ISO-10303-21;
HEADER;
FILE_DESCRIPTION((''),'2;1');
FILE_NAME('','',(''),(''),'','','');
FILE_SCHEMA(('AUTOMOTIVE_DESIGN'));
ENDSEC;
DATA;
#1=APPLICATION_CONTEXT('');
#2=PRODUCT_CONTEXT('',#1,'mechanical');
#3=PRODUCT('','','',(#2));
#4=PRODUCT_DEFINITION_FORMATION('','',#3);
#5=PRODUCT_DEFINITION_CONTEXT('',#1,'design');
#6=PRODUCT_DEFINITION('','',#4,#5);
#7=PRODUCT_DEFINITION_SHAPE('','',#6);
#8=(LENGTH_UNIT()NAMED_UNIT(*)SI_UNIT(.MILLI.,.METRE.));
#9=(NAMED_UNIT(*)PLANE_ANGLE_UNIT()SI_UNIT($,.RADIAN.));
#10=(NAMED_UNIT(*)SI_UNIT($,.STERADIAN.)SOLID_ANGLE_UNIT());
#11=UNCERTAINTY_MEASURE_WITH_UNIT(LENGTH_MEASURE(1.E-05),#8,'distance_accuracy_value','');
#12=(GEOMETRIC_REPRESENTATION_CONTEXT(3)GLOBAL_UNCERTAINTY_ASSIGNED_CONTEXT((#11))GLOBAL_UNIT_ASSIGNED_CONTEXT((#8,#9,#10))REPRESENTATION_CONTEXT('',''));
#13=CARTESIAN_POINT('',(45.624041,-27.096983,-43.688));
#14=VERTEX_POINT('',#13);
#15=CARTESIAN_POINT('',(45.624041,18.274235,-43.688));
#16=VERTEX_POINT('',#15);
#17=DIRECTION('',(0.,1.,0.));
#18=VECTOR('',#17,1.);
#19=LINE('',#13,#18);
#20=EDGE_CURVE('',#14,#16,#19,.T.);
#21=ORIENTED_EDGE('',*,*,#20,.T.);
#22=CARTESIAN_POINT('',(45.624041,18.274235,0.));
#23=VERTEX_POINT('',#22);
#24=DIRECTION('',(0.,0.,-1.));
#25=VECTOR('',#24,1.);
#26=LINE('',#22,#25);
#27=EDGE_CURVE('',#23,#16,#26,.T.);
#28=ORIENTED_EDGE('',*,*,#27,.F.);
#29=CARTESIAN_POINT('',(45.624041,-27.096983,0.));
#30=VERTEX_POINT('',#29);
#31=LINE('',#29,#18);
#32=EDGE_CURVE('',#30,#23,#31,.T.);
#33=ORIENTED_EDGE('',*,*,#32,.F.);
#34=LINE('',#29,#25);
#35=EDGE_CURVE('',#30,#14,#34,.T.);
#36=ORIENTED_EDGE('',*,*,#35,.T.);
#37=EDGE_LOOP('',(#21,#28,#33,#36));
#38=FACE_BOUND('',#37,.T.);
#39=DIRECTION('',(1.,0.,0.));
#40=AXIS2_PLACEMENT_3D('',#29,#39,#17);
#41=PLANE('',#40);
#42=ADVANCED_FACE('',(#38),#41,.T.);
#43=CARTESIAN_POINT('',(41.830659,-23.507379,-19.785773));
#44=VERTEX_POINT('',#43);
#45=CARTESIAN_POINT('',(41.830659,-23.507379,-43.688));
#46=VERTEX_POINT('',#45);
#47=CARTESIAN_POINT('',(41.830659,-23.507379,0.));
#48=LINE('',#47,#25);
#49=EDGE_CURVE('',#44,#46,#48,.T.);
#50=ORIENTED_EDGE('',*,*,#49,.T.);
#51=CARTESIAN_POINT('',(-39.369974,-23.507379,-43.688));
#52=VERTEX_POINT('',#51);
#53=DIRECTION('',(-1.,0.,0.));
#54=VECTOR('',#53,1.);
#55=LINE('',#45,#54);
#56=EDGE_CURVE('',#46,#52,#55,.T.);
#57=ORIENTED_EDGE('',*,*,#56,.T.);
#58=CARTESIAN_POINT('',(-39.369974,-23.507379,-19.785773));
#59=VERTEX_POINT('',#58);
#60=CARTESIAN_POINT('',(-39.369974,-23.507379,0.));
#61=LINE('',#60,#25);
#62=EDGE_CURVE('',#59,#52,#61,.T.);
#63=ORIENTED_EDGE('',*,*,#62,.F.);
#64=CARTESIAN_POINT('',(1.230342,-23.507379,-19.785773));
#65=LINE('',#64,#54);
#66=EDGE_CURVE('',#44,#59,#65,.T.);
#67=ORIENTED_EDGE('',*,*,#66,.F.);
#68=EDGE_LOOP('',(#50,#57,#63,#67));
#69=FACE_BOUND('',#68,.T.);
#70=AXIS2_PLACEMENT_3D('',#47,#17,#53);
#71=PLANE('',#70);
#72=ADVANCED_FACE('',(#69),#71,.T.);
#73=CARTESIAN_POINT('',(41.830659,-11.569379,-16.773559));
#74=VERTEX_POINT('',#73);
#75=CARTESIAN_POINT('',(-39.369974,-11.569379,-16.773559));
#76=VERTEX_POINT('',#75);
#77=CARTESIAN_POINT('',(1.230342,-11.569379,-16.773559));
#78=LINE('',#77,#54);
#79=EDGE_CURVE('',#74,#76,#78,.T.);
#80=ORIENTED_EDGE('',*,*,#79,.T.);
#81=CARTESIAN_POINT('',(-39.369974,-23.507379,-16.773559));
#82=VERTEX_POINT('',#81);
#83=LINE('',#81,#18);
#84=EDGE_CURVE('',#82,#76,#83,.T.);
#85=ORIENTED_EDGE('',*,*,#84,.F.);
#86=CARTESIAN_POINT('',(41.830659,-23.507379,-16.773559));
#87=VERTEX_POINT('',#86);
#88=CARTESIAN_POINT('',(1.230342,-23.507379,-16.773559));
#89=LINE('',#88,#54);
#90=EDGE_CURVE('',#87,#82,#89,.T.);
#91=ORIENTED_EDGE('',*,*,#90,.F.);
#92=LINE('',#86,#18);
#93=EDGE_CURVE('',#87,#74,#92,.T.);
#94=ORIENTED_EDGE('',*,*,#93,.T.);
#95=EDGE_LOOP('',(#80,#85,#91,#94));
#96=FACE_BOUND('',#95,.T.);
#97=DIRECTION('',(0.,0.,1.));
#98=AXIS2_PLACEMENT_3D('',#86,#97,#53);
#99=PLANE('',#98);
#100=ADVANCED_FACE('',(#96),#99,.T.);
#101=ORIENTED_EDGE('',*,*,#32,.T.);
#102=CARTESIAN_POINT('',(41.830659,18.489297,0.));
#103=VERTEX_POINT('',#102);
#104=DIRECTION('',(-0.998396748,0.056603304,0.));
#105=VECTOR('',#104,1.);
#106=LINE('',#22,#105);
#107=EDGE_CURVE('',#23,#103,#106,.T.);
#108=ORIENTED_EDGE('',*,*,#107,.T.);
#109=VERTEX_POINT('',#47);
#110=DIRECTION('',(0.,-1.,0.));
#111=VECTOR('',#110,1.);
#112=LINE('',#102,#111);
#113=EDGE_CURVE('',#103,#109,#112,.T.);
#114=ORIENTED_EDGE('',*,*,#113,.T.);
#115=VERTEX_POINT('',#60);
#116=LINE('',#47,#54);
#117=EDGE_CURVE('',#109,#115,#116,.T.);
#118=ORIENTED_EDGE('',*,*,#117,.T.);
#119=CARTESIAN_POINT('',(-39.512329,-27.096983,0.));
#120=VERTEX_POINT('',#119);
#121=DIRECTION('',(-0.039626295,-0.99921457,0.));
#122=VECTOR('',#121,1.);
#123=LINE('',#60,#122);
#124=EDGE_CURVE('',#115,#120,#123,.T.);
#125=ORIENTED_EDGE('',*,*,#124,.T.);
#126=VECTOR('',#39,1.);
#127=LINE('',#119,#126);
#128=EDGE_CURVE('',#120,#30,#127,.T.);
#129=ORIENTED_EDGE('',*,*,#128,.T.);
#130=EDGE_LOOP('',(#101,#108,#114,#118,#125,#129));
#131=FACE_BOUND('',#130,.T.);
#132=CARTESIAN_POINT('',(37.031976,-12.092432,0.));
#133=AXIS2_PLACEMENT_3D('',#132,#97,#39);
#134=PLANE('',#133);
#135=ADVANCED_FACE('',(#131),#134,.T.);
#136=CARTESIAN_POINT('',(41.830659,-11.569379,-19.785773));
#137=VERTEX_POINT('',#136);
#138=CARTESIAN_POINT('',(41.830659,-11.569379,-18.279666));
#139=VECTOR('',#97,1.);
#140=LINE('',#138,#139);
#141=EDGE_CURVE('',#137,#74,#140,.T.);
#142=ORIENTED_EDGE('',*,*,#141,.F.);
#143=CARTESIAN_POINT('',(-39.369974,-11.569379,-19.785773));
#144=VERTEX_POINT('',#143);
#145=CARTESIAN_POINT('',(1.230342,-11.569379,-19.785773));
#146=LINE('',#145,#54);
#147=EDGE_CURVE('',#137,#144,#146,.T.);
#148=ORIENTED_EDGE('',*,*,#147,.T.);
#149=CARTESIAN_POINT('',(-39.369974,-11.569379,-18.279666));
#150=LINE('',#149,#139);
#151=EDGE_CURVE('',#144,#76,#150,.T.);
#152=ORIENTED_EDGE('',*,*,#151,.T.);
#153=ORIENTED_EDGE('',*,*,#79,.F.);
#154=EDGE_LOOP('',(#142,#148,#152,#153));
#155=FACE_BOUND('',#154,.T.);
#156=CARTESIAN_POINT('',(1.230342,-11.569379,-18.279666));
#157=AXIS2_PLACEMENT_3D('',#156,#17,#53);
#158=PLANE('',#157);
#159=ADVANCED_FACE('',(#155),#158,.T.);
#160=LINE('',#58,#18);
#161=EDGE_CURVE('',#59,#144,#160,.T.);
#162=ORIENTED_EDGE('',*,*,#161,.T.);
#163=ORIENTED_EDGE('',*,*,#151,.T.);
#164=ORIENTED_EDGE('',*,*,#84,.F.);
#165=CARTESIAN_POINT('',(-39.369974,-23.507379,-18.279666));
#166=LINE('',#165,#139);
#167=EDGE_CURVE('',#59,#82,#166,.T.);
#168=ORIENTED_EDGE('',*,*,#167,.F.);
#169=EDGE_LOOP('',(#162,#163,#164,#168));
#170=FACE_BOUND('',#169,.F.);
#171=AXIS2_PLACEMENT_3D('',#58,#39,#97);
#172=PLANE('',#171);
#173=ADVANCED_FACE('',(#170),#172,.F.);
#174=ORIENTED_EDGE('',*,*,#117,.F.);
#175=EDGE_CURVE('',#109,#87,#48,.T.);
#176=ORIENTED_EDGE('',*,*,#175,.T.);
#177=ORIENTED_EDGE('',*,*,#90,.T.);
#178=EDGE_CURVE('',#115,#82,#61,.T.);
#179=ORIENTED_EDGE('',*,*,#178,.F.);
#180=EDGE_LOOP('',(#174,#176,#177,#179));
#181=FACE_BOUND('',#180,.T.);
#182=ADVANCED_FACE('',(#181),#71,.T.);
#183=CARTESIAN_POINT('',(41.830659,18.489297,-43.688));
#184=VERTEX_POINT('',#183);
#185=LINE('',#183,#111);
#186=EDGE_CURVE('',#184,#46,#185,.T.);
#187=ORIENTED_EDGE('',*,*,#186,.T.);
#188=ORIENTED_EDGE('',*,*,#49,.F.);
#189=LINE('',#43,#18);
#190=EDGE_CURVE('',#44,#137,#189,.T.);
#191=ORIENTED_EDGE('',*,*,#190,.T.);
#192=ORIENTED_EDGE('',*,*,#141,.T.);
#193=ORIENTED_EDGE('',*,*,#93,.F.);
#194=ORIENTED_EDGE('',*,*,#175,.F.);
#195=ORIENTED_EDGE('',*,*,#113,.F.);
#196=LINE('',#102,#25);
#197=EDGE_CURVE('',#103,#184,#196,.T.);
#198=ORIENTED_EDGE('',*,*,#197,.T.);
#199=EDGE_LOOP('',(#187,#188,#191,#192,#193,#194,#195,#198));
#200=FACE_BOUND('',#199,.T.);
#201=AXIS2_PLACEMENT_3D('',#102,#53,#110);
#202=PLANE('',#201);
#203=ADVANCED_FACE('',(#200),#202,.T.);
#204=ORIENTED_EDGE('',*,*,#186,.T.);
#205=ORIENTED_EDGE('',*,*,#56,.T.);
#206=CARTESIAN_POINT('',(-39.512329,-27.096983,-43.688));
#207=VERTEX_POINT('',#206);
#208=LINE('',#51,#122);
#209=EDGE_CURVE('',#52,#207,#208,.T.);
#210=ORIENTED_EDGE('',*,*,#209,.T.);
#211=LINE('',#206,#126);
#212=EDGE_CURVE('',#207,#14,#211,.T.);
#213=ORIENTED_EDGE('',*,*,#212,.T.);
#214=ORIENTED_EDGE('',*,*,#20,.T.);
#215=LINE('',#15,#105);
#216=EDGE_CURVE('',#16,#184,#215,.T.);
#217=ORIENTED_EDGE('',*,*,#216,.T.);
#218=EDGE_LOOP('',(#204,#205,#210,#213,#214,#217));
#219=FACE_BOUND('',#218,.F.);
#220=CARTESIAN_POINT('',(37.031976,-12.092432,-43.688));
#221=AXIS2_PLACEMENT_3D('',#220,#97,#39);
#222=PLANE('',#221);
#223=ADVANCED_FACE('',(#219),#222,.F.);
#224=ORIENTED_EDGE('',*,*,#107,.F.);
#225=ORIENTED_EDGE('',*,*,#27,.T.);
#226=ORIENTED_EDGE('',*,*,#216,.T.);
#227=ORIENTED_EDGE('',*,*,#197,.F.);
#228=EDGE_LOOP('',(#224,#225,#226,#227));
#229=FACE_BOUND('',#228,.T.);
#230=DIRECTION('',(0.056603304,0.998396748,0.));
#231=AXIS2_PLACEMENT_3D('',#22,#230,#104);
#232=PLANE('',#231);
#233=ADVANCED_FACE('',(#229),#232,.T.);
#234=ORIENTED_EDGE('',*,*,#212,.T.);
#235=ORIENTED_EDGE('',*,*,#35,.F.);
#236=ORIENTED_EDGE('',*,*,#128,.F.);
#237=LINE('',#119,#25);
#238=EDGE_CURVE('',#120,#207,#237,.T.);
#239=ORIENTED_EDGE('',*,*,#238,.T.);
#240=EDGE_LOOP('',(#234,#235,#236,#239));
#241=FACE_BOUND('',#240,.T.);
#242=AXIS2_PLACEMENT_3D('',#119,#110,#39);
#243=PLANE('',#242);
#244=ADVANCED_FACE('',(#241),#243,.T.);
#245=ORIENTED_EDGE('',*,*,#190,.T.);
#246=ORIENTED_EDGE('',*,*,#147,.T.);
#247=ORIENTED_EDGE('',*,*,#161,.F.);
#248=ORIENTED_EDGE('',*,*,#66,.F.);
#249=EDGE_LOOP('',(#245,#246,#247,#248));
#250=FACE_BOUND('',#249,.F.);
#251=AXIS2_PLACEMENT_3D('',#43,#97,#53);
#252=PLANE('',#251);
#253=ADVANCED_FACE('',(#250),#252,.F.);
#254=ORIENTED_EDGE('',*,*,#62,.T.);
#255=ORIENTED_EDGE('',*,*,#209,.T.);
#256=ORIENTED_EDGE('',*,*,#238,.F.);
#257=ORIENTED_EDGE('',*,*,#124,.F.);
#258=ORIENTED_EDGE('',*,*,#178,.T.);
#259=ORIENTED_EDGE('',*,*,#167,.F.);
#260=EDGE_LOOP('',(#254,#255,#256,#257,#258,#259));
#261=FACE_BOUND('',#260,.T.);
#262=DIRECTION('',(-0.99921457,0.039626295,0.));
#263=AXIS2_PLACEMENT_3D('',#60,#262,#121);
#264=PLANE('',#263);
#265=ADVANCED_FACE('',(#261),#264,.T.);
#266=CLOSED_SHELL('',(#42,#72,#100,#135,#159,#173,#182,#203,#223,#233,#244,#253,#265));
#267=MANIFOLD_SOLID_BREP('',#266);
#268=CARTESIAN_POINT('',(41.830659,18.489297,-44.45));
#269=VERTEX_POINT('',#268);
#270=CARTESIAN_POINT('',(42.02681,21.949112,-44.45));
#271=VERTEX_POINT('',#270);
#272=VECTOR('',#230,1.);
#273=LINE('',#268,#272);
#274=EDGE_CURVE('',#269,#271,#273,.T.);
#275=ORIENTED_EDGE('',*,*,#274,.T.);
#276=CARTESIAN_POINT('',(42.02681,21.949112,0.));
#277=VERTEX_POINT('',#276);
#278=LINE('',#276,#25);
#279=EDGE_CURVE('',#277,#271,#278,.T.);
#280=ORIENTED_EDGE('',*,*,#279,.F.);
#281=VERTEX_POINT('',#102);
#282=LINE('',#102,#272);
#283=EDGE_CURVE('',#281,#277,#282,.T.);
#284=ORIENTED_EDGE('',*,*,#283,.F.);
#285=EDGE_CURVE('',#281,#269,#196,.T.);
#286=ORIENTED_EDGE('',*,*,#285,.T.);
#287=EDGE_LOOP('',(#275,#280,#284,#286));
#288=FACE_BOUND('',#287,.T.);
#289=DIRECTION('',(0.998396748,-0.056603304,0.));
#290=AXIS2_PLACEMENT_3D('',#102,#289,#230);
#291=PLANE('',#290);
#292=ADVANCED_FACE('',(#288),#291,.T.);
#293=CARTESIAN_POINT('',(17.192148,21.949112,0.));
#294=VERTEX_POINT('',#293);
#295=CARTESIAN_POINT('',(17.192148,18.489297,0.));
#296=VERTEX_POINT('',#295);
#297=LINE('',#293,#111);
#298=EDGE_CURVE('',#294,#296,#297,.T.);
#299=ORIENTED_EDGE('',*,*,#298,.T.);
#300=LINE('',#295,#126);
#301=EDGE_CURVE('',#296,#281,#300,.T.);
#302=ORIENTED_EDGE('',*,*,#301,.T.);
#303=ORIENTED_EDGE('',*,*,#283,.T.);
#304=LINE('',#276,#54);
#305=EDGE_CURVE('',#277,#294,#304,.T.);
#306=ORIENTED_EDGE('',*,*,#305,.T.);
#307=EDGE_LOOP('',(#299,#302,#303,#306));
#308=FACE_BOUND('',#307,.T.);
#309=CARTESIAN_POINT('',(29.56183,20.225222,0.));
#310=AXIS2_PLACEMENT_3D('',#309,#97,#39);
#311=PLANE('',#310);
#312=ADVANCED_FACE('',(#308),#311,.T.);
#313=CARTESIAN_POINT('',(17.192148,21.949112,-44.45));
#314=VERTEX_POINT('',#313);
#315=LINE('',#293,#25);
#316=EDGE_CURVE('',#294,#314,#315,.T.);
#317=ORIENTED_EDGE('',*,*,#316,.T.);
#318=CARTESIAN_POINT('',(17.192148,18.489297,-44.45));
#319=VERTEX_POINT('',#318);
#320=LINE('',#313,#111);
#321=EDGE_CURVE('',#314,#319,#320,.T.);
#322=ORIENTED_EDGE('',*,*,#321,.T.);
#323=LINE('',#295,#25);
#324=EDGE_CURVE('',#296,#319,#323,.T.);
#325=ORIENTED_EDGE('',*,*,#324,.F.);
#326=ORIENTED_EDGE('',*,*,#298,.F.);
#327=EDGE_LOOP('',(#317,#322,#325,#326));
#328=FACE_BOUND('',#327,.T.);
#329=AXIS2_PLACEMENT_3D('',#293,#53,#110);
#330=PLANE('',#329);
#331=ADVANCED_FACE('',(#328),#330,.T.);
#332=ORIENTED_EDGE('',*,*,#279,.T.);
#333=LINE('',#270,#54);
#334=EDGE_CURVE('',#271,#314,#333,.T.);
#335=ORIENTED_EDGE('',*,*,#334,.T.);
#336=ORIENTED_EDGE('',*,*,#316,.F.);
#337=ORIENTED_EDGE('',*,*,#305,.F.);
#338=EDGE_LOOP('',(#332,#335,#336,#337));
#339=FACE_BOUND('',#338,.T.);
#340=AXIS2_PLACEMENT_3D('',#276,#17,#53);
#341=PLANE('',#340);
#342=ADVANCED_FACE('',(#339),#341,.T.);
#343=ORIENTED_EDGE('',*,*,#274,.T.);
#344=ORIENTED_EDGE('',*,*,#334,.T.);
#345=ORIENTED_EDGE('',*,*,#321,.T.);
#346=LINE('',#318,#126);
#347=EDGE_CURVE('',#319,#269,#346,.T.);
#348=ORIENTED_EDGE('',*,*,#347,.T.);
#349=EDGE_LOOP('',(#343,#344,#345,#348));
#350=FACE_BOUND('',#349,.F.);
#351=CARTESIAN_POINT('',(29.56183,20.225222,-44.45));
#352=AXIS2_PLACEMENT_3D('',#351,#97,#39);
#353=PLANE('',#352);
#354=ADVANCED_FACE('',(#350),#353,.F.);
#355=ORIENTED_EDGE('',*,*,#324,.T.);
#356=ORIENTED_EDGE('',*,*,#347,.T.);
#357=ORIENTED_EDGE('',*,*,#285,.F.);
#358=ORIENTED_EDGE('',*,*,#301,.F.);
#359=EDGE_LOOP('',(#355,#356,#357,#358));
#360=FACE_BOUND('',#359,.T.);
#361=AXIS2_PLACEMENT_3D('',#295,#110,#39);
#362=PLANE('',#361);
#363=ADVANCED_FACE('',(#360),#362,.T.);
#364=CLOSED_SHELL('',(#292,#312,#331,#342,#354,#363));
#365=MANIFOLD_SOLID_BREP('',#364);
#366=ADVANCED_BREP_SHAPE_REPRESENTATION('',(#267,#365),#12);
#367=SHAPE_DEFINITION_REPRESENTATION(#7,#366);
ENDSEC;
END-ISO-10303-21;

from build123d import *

# Parameters (mm, degrees)
F1_DEPTH = 44.45
F2_DEPTH = 43.688
F3_W     = 81.200633198
F3_H     = 3.012213856
F4_DEPTH = 11.938


# Not quite as in the source:
# - ends of sketch curves that miss each other by under 0.0002 mm in the source are joined


with BuildPart() as f1:
    # F0 (on Top) → F1 (new body)
    with BuildSketch(Plane.XY):
        Polygon((17.2227267176, 18.4892974794), (41.8306589127, 18.4892974794), (42.026810348, 21.9491124153), (17.1921476722, 21.9491124153), (17.1921476722, 18.4892974794), align=None)
    extrude(amount=-F1_DEPTH)


with BuildPart() as f2:
    # F0 (on Top) → F2 (new body)
    with BuildSketch(Plane.XY):
        Polygon((41.8306589127, -23.5073789954), (12.9724387079, -23.5073789954), (12.9724387079, -27.0969830453), (45.6240410119, -27.0969830453), (45.6240410119, 18.274234721), (41.8306589127, 18.4892974794), (41.8306589127, 10.6105906889), align=None)
        Polygon((-9.2982515926, -23.5073789954), (-39.3699742854, -23.5073789954), (-39.5123288035, -27.0969830453), (12.9724387079, -27.0969830453), (12.9724387079, -23.5073789954), align=None)
    extrude(amount=-F2_DEPTH)

    # F3 (on face) → F4 (join)
    with BuildSketch(Plane(origin=(0, -23.5073789954, 0), x_dir=(-1, 0, 0), z_dir=(0, 1, 0))):
        with Locations((-1.2303423136, -18.2796660811)):
            Rectangle(F3_W, F3_H)
    extrude(amount=F4_DEPTH)


solid = Compound([f1.part, f2.part])
